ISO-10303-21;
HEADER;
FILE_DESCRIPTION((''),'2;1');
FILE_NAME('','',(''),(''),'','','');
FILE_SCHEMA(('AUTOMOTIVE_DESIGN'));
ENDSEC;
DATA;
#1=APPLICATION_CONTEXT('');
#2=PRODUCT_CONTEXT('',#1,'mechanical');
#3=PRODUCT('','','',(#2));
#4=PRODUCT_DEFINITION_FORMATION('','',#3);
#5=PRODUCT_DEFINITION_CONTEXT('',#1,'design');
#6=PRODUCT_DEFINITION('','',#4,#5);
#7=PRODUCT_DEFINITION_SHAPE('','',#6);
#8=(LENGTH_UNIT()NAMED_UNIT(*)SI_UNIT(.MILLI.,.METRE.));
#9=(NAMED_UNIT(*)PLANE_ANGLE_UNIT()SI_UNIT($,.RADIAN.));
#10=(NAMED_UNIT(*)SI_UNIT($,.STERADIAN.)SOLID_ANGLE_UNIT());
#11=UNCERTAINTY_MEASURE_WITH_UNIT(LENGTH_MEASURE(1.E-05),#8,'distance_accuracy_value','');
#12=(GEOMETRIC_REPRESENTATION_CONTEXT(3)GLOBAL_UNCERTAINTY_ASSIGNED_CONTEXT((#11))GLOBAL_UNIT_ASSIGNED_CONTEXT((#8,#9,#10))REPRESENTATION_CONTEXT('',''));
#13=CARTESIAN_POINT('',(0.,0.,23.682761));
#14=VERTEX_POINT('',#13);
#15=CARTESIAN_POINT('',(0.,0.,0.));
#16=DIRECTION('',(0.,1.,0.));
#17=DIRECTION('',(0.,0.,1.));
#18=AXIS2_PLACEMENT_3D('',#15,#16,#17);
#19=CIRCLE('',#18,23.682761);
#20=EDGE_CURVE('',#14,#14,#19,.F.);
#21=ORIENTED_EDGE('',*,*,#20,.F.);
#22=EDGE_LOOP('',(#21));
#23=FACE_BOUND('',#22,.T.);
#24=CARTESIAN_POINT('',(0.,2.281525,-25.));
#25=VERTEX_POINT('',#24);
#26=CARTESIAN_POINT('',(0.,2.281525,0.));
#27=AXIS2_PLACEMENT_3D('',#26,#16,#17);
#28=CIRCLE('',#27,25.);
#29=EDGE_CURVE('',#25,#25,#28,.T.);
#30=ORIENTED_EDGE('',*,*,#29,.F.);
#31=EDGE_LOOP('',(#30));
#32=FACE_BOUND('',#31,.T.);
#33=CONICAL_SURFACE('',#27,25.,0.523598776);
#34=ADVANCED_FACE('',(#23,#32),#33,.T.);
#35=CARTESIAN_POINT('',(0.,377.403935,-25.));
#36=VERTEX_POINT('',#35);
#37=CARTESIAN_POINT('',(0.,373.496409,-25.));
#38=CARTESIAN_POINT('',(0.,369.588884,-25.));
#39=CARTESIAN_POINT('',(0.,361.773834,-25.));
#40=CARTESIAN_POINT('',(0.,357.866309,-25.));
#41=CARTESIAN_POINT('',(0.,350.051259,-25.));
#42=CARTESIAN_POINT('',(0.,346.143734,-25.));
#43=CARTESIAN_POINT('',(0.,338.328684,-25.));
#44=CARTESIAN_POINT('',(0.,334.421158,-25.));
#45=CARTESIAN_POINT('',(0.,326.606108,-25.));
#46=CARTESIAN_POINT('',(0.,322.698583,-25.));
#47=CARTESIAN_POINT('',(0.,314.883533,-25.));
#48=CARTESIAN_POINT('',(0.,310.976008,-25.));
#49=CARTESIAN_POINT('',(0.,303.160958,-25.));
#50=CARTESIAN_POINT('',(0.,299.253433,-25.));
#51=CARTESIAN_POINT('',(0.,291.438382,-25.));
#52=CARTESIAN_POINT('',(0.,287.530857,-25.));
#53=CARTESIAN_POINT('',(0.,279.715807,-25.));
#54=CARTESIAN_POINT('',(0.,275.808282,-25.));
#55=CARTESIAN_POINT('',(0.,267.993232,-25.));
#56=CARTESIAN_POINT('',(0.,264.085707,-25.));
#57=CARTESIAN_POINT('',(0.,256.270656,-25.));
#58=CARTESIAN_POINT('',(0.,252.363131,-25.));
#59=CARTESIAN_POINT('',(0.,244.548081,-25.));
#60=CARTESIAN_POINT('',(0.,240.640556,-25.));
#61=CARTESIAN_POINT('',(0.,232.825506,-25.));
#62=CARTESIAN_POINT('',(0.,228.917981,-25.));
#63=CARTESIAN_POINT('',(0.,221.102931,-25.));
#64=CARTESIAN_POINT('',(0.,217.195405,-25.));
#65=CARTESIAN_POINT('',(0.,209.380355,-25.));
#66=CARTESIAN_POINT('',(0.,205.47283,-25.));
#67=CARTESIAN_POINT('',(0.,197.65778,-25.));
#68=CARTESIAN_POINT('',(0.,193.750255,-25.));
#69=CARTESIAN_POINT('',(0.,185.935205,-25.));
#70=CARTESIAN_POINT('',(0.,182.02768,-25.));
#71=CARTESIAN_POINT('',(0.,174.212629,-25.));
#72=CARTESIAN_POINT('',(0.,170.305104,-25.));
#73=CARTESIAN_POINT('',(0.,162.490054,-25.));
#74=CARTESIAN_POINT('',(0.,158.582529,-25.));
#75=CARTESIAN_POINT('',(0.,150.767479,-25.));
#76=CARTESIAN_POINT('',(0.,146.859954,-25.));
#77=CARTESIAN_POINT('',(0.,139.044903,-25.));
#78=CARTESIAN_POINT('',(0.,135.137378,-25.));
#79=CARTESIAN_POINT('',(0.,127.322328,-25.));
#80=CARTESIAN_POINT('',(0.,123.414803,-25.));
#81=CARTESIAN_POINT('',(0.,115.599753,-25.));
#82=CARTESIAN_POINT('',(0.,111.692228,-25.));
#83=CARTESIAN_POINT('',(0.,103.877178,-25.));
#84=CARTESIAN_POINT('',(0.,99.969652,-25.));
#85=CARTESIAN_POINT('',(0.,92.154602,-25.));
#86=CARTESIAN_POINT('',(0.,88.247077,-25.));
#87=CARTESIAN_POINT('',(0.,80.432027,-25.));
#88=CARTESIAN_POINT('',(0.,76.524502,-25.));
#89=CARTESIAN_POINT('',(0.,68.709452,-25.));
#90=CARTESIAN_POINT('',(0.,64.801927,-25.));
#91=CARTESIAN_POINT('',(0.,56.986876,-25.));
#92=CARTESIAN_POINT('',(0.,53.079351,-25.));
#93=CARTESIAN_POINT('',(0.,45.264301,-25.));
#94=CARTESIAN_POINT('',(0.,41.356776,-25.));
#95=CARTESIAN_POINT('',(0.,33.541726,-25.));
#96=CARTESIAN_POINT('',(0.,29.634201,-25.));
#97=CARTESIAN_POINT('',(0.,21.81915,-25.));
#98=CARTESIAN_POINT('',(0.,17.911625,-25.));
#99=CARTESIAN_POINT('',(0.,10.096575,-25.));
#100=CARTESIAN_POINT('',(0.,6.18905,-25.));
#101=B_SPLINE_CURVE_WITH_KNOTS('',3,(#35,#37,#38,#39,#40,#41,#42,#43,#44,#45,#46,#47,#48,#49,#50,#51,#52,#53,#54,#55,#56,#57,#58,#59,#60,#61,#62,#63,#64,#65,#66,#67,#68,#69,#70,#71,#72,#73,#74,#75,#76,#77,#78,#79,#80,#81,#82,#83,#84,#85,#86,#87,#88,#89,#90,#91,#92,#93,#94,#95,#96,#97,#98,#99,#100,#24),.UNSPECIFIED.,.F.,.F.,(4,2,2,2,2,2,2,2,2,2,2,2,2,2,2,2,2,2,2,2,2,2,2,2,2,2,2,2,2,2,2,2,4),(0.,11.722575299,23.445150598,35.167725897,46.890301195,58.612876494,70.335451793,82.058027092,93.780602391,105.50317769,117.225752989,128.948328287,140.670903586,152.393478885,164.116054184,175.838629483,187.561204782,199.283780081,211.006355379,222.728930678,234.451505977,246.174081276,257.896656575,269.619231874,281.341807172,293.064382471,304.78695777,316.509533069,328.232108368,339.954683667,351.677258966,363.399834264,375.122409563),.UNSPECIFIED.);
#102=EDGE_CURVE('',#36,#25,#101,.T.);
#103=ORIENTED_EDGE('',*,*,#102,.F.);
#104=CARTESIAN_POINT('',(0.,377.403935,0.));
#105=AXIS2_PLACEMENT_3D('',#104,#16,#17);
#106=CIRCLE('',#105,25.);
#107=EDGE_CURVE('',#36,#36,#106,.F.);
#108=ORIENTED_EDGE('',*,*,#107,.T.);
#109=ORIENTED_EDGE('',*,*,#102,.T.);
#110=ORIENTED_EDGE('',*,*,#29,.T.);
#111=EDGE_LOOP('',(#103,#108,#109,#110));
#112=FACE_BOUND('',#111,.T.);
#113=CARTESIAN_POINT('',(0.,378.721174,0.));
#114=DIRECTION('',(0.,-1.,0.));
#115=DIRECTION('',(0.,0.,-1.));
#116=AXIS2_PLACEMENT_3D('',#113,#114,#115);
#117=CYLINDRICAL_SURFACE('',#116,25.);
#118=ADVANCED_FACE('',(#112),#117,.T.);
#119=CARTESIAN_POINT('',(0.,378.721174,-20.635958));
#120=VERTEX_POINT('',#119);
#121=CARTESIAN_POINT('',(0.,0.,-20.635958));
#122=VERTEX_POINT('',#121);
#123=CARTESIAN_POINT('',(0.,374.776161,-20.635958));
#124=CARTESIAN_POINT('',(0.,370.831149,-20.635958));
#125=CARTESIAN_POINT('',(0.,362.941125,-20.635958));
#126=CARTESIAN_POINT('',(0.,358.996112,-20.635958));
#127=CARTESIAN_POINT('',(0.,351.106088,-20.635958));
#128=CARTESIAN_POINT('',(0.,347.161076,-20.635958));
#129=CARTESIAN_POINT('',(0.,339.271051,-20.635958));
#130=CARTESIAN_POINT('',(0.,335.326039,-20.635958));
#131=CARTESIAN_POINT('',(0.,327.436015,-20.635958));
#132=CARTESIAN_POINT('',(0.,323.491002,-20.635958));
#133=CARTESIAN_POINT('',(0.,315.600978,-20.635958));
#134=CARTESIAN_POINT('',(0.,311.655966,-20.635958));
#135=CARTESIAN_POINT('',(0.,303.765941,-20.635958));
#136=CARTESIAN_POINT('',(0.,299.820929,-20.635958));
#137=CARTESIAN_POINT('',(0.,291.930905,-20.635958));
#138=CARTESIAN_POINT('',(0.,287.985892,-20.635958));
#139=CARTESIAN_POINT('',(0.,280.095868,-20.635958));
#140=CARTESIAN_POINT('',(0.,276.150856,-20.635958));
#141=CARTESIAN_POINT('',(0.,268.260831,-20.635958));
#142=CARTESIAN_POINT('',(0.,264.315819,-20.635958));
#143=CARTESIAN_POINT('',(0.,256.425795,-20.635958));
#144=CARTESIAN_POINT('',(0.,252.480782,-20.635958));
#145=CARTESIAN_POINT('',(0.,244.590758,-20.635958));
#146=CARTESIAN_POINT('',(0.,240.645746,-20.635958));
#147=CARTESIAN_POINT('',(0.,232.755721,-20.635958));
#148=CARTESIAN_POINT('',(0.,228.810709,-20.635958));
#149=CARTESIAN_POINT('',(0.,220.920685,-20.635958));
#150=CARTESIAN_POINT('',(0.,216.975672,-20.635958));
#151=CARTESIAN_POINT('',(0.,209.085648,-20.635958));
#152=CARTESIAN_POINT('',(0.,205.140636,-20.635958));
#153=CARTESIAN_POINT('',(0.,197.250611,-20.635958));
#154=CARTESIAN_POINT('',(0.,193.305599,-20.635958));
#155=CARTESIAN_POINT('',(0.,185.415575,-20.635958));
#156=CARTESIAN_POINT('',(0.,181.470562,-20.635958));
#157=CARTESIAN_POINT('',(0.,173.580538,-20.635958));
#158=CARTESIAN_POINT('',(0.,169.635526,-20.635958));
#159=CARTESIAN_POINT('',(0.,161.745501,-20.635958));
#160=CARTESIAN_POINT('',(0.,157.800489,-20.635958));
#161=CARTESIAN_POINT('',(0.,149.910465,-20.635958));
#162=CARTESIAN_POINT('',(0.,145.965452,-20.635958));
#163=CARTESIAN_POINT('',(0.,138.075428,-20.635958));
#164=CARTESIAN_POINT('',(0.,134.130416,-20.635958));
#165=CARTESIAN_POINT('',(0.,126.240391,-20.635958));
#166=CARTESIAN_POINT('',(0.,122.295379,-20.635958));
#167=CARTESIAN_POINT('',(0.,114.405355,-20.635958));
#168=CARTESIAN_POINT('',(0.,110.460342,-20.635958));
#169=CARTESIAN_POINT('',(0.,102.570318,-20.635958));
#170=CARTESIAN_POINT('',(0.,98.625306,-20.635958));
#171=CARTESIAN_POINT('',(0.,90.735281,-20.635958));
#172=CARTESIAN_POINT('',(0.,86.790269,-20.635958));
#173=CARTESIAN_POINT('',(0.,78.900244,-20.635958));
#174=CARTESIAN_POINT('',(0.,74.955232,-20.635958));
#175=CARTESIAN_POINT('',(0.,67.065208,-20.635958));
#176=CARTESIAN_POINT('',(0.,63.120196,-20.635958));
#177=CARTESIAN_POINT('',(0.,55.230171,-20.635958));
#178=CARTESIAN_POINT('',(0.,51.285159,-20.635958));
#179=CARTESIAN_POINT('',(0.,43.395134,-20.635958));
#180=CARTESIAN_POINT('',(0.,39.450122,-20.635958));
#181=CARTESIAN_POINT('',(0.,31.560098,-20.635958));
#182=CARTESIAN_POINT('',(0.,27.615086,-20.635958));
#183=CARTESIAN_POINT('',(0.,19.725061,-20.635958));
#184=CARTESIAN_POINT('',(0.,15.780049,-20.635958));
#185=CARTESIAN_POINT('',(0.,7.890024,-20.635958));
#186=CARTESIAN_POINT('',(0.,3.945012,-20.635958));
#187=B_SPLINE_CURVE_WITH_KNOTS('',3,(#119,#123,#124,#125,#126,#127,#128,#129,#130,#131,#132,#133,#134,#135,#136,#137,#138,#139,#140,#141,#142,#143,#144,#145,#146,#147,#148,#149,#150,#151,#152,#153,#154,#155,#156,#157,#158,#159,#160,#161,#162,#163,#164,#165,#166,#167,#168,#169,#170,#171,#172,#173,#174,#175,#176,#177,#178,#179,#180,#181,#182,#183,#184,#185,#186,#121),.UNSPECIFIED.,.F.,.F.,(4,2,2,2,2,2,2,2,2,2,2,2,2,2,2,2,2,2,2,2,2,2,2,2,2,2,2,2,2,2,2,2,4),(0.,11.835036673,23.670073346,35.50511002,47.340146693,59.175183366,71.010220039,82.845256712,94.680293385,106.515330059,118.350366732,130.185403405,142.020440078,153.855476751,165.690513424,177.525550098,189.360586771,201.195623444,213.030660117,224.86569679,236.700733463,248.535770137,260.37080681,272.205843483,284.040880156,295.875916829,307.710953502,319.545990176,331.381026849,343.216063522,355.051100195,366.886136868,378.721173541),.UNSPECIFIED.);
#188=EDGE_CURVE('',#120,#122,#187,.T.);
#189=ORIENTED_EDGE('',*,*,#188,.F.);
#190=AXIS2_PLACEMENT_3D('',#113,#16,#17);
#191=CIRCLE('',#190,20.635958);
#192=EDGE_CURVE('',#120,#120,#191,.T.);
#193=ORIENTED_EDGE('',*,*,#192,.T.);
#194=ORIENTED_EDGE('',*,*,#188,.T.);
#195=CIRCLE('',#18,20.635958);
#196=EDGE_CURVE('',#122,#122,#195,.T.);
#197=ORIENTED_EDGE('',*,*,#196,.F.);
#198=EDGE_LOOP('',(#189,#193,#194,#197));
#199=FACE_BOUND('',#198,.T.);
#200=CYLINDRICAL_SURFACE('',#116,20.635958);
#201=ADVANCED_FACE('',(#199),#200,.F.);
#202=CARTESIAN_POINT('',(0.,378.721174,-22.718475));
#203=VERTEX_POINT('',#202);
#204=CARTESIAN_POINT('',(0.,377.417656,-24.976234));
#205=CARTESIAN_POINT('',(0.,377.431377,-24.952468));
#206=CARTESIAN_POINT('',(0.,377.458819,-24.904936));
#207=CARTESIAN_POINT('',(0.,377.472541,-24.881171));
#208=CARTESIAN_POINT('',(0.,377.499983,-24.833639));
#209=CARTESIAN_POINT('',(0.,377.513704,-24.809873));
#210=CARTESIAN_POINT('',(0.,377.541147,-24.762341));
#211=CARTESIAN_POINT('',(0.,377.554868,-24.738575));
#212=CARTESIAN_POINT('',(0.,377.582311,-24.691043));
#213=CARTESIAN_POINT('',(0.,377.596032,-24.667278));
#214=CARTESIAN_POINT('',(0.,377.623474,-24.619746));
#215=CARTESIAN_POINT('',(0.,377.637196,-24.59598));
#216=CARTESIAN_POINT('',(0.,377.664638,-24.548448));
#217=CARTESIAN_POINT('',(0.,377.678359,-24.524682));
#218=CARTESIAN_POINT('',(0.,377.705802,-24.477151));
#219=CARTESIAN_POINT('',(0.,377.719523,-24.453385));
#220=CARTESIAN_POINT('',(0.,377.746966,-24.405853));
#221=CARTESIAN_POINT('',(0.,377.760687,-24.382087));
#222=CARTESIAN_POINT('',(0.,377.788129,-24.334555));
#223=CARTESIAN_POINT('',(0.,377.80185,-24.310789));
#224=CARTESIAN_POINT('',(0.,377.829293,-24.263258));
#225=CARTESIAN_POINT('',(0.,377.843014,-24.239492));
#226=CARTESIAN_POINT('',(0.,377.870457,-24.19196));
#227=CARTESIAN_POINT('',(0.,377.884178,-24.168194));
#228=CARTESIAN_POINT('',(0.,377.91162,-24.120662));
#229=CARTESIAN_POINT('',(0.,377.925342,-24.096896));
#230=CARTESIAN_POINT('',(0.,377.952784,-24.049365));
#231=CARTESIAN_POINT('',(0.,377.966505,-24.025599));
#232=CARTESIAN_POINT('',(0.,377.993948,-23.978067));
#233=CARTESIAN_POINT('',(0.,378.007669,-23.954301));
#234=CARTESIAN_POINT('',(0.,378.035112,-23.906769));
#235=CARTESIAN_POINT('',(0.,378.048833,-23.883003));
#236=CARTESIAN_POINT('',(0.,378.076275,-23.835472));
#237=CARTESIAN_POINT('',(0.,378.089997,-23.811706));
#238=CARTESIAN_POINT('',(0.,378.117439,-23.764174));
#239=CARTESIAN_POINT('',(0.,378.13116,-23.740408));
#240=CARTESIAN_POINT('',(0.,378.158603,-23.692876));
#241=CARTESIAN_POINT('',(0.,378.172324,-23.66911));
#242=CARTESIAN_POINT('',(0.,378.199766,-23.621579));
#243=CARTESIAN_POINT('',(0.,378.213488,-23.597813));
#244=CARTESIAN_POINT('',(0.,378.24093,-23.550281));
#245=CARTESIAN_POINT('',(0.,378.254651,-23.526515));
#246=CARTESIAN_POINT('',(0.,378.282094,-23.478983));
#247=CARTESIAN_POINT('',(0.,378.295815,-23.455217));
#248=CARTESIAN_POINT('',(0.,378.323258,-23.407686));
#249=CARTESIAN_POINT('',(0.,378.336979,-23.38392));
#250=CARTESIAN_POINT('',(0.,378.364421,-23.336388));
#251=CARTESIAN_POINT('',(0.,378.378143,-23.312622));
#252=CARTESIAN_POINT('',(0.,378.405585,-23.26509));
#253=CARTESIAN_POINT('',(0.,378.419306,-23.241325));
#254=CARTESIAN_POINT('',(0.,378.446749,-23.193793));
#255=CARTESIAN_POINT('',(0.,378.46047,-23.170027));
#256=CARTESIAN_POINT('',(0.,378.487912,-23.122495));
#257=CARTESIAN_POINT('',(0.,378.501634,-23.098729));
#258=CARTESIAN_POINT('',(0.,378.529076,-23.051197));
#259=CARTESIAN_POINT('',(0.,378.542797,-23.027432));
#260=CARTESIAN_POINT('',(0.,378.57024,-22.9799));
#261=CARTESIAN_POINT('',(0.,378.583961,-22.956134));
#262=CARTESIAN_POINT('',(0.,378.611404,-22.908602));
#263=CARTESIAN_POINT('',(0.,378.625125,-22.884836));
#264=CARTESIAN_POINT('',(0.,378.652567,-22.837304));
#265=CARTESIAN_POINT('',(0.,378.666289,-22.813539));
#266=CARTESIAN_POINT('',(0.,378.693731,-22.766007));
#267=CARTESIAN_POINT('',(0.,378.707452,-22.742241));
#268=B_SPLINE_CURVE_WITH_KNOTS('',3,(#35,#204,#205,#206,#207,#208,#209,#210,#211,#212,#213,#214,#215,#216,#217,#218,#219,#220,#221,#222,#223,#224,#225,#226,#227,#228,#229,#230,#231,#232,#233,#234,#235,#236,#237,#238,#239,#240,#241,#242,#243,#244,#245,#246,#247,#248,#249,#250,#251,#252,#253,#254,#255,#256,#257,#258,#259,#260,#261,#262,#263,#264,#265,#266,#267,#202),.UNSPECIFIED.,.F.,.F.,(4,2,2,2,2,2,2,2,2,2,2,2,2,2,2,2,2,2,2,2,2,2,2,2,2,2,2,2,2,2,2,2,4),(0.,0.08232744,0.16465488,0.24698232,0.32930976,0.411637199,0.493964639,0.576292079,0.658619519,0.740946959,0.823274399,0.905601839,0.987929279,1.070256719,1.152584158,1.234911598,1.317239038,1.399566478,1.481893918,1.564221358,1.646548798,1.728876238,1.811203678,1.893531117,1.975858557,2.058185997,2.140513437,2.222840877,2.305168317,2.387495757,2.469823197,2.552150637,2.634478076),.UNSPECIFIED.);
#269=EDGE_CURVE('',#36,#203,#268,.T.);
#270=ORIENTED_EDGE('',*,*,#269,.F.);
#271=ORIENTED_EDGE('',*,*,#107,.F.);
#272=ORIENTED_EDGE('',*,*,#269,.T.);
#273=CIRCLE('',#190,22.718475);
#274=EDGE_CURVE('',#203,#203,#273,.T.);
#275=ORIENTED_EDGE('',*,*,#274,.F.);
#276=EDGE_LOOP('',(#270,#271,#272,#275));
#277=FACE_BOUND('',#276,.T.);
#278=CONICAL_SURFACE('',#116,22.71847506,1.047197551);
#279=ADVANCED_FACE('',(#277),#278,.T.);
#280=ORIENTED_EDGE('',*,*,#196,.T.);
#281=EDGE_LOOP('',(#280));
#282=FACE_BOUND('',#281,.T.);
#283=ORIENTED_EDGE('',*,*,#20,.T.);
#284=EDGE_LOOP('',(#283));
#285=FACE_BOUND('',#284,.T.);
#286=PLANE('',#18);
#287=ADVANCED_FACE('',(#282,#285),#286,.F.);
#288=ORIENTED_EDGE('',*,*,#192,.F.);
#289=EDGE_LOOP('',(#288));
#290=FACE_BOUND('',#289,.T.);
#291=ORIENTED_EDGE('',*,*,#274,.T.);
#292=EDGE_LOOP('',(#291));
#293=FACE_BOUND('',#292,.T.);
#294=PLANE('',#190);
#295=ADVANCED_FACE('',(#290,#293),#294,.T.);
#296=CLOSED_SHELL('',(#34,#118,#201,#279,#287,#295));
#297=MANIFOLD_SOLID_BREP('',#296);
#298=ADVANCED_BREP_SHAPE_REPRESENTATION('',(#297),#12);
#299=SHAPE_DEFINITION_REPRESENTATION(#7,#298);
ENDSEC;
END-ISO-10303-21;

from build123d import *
from OCP.BRepFilletAPI import BRepFilletAPI_MakeChamfer

# Parameters (mm, degrees)
SKETCH1_R           = 25
BOSS_EXTRUDE1_DEPTH = 378.721173541
SKETCH2_R           = 20.635957913
CUT_EXTRUDE1_DEPTH  = 381.367884145
CHAMFER1_SIZE       = 1.317239038
CHAMFER1_SIZE2      = 2.28152494


with BuildPart() as part:
    # Sketch1 → Boss-Extrude1 (new body)
    with BuildSketch(Plane(origin=(0, 0, 0), x_dir=(1, 0, 0), z_dir=(0, 1, 0))):
        Circle(SKETCH1_R)
    extrude(amount=BOSS_EXTRUDE1_DEPTH)

    # Sketch2 → Cut-Extrude1 (cut, through all)
    with BuildSketch(Plane(origin=(0, 0, 0), x_dir=(1, 0, 0), z_dir=(0, 1, 0))):
        Circle(SKETCH2_R)
    extrude(amount=CUT_EXTRUDE1_DEPTH, mode=Mode.SUBTRACT)

    # Chamfer1: one chamfer whose edges measure the first distance from different faces: ONE call of the kernel's chamfer builder (chamfer() names one face for all edges)
    chamfer1_edges_1 = [part.edges().sort_by_distance(p)[0] for p in [
        (-25, 378.721173541, 0),
    ]]
    chamfer1_side_1 = [part.faces().sort_by_distance(p)[0] for p in [
        (-25, 189.360586771, 0),
    ]]
    chamfer1_edges_2 = [part.edges().sort_by_distance(p)[0] for p in [
        (-25, 0, 0),
    ]]
    chamfer1_side_2 = [part.faces().sort_by_distance(p)[0] for p in [
        (-24.292893219, 0, 0),
    ]]
    chamfer1 = BRepFilletAPI_MakeChamfer(part.part.solid().wrapped)
    for e in chamfer1_edges_1:
        chamfer1.Add(CHAMFER1_SIZE, CHAMFER1_SIZE2, e.wrapped, chamfer1_side_1[0].wrapped)  # the first distance lies on this face
    for e in chamfer1_edges_2:
        chamfer1.Add(CHAMFER1_SIZE, CHAMFER1_SIZE2, e.wrapped, chamfer1_side_2[0].wrapped)  # the first distance lies on this face
    add(Compound.cast(chamfer1.Shape()), mode=Mode.REPLACE)


solid = part.part
